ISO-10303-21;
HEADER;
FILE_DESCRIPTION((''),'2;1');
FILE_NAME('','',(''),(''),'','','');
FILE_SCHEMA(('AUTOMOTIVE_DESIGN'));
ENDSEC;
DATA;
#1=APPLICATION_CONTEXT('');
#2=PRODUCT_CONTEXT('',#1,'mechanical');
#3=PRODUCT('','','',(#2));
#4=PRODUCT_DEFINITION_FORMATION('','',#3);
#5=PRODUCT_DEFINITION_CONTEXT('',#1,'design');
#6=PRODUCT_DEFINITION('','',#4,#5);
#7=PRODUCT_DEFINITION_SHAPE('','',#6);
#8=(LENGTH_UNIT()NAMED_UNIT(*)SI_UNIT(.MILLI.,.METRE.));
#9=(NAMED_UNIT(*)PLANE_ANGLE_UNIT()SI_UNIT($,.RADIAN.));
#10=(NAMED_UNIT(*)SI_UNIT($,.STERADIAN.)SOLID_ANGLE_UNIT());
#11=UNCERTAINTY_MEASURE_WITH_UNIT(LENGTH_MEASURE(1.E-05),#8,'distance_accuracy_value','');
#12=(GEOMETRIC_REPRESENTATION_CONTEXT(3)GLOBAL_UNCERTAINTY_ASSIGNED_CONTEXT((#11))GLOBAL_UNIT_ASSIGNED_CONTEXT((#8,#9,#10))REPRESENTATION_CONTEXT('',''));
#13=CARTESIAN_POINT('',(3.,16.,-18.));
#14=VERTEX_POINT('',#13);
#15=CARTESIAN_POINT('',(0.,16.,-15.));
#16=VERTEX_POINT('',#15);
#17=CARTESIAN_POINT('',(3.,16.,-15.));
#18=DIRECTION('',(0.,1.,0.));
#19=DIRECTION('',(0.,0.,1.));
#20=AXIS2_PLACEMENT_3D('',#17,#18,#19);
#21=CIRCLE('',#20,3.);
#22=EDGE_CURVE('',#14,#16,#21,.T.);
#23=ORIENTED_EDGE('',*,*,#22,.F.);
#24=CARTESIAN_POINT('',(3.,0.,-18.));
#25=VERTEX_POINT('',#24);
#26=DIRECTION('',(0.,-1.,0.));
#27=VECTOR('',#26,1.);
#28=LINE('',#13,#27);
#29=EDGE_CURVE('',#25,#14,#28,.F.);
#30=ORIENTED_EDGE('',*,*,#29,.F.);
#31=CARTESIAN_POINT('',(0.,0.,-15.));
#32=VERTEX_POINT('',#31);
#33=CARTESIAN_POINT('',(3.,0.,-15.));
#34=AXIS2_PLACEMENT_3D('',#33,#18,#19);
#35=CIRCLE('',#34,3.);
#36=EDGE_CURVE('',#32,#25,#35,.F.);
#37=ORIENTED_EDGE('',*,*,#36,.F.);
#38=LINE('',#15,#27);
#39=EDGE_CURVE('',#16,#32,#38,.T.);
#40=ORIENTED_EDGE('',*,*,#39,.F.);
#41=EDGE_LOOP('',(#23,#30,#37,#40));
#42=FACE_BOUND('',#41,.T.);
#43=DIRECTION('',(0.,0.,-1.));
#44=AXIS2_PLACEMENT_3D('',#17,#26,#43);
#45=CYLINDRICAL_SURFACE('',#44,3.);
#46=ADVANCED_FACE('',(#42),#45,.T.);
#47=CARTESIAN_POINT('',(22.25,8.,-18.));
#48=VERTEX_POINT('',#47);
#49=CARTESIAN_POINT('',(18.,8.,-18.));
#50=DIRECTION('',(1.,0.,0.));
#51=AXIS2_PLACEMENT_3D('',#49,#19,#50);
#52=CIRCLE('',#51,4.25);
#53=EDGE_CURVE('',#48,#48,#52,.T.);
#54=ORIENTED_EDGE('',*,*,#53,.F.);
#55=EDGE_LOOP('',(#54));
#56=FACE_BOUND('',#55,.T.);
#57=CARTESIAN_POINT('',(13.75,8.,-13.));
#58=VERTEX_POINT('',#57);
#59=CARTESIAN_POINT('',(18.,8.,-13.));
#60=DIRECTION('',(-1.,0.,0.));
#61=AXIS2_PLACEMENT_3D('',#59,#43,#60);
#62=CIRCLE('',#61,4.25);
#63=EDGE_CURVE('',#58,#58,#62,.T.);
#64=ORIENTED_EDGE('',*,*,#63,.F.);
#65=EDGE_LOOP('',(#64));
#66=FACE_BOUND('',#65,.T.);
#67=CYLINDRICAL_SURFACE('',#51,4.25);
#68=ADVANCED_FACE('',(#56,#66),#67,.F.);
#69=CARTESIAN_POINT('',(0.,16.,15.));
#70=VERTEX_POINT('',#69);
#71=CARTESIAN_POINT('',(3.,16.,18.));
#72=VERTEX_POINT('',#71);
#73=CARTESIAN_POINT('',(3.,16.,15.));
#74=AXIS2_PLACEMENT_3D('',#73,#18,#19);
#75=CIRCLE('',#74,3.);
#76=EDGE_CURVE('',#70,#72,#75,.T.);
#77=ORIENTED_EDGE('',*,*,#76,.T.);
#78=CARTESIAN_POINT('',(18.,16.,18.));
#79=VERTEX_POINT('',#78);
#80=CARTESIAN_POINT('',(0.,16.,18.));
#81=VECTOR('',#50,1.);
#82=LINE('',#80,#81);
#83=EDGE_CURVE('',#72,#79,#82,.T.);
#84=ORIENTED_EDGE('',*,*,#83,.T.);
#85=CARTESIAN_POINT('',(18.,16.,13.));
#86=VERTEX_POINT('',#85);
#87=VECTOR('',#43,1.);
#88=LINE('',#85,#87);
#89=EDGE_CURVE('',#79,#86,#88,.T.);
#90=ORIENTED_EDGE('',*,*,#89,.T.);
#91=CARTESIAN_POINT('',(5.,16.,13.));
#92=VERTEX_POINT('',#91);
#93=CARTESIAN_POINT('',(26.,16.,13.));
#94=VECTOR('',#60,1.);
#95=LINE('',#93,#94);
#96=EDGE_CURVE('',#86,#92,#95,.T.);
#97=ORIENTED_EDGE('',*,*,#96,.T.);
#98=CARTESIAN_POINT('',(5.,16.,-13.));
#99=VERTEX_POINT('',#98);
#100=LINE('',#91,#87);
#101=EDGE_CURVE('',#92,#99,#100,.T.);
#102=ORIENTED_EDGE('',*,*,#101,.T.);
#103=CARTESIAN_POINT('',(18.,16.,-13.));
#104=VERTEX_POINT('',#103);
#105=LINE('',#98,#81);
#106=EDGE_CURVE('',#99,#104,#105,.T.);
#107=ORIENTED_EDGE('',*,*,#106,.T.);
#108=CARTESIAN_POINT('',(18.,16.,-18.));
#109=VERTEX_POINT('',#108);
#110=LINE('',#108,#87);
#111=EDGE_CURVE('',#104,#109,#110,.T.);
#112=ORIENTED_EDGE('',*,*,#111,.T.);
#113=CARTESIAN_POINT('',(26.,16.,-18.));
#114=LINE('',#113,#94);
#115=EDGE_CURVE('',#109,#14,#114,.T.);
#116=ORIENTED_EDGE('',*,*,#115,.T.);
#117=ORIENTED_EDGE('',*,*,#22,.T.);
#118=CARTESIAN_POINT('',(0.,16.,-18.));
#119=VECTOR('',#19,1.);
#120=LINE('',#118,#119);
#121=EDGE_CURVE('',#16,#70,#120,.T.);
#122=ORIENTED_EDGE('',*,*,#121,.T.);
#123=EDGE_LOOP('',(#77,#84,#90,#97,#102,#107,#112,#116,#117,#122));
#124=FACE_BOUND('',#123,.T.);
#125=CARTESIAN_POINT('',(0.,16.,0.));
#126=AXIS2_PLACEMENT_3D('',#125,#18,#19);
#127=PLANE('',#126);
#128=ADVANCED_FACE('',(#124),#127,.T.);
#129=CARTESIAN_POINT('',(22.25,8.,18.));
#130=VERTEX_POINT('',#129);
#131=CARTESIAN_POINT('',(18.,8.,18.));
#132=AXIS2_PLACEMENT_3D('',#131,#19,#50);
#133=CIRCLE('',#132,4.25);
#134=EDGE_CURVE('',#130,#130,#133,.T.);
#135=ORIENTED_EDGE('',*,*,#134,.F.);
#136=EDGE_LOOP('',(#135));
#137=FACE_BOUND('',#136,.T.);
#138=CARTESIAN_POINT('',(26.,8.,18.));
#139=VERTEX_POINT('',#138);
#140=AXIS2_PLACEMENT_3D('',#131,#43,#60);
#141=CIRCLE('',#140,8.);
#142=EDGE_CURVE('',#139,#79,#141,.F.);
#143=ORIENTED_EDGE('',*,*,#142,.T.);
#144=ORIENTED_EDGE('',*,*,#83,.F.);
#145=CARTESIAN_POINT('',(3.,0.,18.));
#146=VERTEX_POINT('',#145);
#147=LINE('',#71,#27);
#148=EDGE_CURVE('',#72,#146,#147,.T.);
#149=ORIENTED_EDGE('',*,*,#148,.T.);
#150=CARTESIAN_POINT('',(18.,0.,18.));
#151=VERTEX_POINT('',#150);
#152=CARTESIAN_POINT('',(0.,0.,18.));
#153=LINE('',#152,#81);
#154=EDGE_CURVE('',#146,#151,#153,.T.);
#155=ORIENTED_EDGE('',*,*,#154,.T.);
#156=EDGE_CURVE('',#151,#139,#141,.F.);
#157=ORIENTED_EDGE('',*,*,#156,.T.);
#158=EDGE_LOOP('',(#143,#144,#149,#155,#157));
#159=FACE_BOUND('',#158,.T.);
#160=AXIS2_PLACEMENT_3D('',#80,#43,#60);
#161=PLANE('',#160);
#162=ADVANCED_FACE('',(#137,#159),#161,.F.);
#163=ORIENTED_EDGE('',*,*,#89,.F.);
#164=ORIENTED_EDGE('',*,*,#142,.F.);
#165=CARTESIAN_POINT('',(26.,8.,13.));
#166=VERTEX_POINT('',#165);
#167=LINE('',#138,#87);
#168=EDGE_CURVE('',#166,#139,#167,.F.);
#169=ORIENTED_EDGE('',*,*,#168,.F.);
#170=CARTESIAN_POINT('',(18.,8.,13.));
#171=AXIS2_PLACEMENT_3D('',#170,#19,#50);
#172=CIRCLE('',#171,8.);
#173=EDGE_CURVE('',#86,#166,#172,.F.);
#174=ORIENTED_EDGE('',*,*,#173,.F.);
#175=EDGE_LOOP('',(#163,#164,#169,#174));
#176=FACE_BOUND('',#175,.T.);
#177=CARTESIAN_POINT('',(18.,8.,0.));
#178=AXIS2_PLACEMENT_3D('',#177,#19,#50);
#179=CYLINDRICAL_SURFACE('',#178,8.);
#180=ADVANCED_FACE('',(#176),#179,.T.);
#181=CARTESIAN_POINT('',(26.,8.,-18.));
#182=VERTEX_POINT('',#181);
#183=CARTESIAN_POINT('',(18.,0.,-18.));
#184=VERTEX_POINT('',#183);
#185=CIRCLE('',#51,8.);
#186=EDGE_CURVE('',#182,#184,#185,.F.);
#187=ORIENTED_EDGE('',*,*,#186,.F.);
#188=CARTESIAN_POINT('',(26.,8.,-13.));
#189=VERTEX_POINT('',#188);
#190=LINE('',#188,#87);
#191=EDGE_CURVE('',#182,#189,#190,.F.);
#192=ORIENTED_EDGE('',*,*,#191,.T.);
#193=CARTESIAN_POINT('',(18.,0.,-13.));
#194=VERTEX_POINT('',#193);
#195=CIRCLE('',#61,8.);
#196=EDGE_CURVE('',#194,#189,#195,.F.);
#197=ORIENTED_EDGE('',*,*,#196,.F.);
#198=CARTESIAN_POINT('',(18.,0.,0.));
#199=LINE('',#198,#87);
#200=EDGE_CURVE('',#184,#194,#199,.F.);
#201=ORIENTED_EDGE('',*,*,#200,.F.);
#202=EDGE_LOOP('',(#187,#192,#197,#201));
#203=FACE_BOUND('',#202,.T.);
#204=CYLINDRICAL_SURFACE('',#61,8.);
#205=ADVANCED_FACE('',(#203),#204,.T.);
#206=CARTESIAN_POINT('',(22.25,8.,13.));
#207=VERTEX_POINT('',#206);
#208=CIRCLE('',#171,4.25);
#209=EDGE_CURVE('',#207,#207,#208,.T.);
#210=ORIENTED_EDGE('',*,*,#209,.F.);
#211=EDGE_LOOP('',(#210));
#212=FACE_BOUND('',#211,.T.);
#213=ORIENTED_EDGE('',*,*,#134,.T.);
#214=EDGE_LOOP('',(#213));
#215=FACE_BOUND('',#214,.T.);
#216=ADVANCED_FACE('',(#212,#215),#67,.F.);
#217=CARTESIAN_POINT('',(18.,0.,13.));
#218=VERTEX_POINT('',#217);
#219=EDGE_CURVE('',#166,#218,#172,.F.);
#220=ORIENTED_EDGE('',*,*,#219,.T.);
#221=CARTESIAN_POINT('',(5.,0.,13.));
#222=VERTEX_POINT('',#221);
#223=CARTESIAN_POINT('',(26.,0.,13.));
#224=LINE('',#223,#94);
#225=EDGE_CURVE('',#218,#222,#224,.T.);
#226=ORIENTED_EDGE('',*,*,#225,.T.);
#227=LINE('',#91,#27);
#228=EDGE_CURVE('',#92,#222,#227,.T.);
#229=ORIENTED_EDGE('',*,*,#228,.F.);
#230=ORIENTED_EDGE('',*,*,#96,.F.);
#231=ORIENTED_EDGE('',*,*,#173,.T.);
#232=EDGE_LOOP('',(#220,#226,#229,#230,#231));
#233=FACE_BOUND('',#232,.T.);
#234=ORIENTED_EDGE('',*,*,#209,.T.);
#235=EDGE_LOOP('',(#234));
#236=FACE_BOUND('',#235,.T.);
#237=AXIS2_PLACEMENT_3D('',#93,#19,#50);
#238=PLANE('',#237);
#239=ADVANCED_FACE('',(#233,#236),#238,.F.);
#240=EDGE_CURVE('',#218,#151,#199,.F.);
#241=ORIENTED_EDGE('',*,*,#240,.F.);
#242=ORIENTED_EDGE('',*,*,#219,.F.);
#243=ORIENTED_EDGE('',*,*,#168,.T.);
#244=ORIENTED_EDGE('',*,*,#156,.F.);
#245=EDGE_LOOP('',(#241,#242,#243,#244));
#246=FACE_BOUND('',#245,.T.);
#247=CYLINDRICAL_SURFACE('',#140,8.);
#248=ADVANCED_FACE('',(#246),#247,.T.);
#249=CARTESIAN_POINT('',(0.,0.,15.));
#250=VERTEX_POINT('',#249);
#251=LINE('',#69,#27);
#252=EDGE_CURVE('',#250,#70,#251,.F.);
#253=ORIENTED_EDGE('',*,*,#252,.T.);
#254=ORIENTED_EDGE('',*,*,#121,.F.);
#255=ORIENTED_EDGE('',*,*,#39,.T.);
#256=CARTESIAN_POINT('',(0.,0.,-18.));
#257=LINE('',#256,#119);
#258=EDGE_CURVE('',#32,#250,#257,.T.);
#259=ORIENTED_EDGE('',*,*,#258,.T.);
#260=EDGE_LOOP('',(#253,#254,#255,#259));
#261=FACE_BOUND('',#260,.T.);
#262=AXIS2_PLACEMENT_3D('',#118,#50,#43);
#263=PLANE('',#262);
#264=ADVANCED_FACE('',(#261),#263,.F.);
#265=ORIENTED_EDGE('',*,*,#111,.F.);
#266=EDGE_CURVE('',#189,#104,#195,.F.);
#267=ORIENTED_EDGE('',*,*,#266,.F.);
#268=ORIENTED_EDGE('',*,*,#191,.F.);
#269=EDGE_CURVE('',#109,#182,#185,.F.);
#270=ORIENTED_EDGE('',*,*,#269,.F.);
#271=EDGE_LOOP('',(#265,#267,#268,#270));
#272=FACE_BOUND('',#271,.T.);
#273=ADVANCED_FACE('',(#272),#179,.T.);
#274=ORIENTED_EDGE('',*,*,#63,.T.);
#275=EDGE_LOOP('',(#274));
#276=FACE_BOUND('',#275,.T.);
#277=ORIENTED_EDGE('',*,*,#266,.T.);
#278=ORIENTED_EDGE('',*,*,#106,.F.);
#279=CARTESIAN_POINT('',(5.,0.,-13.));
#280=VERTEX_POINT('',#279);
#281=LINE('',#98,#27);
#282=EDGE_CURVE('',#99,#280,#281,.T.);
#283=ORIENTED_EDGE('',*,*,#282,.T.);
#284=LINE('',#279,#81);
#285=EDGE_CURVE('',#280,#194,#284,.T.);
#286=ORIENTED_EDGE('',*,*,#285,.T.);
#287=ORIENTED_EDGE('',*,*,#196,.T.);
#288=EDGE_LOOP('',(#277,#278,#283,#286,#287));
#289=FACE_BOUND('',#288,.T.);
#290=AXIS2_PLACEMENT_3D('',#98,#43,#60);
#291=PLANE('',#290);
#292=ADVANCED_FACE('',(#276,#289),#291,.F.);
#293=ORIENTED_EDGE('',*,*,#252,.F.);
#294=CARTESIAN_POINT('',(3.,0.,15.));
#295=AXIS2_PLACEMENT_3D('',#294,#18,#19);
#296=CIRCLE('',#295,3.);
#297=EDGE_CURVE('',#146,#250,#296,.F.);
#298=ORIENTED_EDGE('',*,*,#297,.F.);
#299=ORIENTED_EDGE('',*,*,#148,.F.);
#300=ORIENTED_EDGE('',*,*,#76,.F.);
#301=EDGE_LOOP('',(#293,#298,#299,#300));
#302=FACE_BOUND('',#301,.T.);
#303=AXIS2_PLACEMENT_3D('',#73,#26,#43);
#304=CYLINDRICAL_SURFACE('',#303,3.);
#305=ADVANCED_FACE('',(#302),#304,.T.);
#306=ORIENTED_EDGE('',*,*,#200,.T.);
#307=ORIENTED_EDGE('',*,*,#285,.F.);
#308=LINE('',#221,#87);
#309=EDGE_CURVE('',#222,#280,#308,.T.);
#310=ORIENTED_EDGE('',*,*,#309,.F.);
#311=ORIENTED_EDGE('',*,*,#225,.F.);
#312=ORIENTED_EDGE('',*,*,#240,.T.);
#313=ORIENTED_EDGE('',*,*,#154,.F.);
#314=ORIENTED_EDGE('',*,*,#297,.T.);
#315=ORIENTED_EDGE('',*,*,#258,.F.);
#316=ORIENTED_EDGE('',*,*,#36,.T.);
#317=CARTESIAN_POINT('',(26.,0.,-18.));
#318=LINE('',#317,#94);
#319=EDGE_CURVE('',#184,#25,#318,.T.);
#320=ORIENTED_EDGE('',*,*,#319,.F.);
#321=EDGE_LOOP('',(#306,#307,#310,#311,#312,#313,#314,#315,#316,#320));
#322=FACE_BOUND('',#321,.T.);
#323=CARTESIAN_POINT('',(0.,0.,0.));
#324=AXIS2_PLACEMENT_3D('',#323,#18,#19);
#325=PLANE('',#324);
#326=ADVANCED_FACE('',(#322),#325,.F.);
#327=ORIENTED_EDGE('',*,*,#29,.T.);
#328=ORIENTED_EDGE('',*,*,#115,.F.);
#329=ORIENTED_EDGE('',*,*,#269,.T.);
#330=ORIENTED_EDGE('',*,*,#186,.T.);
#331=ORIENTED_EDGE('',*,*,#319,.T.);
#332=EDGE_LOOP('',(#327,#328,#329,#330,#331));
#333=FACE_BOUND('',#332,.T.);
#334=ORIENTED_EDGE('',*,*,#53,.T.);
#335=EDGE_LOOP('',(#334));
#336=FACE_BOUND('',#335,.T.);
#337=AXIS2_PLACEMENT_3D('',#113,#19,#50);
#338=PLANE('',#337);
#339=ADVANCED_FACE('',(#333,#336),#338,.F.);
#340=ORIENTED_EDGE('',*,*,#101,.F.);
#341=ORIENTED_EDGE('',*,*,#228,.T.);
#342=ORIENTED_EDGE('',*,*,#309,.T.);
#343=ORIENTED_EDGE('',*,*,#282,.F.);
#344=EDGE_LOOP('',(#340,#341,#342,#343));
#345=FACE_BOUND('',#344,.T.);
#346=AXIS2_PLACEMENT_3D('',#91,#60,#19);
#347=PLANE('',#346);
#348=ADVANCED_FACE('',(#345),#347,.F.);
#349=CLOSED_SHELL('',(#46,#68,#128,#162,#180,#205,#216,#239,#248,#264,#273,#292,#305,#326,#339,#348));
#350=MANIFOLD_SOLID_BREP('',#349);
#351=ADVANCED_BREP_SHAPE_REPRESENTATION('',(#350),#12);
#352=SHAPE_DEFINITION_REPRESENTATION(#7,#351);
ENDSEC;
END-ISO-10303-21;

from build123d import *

# Parameters (mm, degrees)
EXTRUDE_1_DEPTH     = 16
FILLET_1_R          = 8
FILLET_2_R          = 3
SKETCH_2_R          = 4.25
CUT_EXTRUDE_1_DEPTH = 48.201694885


with BuildPart() as part:
    # Эскиз1 → Бобышка-Вытянуть1 (new body)
    with BuildSketch(Plane(origin=(0, 0, 0), x_dir=(1, 0, 0), z_dir=(0, 1, 0))):
        Polygon((0, 18), (0, -18), (26, -18), (26, -13), (5, -13), (5, 13), (26, 13), (26, 18), align=None)
    extrude(amount=EXTRUDE_1_DEPTH)

    # Скругление1
    fillet_1_edges = [part.edges().sort_by_distance(p)[0] for p in [
        (26, 0, -15.5),
        (26, 16, -15.5),
        (26, 0, 15.5),
        (26, 16, 15.5),
    ]]
    fillet(fillet_1_edges, radius=FILLET_1_R - 0.0001)  # a hair under: the kernel refuses the full size

    # Скругление2
    fillet_2_edges = [part.edges().sort_by_distance(p)[0] for p in [
        (0, 8, 18),
        (0, 8, -18),
    ]]
    fillet(fillet_2_edges, radius=FILLET_2_R)

    # Эскиз2 → Вырез-Вытянуть1 (cut, through all)
    with BuildSketch(Plane.XY.offset(18)):
        with Locations((18, 8)):
            Circle(SKETCH_2_R)
    extrude(amount=-CUT_EXTRUDE_1_DEPTH, mode=Mode.SUBTRACT)


solid = part.part
